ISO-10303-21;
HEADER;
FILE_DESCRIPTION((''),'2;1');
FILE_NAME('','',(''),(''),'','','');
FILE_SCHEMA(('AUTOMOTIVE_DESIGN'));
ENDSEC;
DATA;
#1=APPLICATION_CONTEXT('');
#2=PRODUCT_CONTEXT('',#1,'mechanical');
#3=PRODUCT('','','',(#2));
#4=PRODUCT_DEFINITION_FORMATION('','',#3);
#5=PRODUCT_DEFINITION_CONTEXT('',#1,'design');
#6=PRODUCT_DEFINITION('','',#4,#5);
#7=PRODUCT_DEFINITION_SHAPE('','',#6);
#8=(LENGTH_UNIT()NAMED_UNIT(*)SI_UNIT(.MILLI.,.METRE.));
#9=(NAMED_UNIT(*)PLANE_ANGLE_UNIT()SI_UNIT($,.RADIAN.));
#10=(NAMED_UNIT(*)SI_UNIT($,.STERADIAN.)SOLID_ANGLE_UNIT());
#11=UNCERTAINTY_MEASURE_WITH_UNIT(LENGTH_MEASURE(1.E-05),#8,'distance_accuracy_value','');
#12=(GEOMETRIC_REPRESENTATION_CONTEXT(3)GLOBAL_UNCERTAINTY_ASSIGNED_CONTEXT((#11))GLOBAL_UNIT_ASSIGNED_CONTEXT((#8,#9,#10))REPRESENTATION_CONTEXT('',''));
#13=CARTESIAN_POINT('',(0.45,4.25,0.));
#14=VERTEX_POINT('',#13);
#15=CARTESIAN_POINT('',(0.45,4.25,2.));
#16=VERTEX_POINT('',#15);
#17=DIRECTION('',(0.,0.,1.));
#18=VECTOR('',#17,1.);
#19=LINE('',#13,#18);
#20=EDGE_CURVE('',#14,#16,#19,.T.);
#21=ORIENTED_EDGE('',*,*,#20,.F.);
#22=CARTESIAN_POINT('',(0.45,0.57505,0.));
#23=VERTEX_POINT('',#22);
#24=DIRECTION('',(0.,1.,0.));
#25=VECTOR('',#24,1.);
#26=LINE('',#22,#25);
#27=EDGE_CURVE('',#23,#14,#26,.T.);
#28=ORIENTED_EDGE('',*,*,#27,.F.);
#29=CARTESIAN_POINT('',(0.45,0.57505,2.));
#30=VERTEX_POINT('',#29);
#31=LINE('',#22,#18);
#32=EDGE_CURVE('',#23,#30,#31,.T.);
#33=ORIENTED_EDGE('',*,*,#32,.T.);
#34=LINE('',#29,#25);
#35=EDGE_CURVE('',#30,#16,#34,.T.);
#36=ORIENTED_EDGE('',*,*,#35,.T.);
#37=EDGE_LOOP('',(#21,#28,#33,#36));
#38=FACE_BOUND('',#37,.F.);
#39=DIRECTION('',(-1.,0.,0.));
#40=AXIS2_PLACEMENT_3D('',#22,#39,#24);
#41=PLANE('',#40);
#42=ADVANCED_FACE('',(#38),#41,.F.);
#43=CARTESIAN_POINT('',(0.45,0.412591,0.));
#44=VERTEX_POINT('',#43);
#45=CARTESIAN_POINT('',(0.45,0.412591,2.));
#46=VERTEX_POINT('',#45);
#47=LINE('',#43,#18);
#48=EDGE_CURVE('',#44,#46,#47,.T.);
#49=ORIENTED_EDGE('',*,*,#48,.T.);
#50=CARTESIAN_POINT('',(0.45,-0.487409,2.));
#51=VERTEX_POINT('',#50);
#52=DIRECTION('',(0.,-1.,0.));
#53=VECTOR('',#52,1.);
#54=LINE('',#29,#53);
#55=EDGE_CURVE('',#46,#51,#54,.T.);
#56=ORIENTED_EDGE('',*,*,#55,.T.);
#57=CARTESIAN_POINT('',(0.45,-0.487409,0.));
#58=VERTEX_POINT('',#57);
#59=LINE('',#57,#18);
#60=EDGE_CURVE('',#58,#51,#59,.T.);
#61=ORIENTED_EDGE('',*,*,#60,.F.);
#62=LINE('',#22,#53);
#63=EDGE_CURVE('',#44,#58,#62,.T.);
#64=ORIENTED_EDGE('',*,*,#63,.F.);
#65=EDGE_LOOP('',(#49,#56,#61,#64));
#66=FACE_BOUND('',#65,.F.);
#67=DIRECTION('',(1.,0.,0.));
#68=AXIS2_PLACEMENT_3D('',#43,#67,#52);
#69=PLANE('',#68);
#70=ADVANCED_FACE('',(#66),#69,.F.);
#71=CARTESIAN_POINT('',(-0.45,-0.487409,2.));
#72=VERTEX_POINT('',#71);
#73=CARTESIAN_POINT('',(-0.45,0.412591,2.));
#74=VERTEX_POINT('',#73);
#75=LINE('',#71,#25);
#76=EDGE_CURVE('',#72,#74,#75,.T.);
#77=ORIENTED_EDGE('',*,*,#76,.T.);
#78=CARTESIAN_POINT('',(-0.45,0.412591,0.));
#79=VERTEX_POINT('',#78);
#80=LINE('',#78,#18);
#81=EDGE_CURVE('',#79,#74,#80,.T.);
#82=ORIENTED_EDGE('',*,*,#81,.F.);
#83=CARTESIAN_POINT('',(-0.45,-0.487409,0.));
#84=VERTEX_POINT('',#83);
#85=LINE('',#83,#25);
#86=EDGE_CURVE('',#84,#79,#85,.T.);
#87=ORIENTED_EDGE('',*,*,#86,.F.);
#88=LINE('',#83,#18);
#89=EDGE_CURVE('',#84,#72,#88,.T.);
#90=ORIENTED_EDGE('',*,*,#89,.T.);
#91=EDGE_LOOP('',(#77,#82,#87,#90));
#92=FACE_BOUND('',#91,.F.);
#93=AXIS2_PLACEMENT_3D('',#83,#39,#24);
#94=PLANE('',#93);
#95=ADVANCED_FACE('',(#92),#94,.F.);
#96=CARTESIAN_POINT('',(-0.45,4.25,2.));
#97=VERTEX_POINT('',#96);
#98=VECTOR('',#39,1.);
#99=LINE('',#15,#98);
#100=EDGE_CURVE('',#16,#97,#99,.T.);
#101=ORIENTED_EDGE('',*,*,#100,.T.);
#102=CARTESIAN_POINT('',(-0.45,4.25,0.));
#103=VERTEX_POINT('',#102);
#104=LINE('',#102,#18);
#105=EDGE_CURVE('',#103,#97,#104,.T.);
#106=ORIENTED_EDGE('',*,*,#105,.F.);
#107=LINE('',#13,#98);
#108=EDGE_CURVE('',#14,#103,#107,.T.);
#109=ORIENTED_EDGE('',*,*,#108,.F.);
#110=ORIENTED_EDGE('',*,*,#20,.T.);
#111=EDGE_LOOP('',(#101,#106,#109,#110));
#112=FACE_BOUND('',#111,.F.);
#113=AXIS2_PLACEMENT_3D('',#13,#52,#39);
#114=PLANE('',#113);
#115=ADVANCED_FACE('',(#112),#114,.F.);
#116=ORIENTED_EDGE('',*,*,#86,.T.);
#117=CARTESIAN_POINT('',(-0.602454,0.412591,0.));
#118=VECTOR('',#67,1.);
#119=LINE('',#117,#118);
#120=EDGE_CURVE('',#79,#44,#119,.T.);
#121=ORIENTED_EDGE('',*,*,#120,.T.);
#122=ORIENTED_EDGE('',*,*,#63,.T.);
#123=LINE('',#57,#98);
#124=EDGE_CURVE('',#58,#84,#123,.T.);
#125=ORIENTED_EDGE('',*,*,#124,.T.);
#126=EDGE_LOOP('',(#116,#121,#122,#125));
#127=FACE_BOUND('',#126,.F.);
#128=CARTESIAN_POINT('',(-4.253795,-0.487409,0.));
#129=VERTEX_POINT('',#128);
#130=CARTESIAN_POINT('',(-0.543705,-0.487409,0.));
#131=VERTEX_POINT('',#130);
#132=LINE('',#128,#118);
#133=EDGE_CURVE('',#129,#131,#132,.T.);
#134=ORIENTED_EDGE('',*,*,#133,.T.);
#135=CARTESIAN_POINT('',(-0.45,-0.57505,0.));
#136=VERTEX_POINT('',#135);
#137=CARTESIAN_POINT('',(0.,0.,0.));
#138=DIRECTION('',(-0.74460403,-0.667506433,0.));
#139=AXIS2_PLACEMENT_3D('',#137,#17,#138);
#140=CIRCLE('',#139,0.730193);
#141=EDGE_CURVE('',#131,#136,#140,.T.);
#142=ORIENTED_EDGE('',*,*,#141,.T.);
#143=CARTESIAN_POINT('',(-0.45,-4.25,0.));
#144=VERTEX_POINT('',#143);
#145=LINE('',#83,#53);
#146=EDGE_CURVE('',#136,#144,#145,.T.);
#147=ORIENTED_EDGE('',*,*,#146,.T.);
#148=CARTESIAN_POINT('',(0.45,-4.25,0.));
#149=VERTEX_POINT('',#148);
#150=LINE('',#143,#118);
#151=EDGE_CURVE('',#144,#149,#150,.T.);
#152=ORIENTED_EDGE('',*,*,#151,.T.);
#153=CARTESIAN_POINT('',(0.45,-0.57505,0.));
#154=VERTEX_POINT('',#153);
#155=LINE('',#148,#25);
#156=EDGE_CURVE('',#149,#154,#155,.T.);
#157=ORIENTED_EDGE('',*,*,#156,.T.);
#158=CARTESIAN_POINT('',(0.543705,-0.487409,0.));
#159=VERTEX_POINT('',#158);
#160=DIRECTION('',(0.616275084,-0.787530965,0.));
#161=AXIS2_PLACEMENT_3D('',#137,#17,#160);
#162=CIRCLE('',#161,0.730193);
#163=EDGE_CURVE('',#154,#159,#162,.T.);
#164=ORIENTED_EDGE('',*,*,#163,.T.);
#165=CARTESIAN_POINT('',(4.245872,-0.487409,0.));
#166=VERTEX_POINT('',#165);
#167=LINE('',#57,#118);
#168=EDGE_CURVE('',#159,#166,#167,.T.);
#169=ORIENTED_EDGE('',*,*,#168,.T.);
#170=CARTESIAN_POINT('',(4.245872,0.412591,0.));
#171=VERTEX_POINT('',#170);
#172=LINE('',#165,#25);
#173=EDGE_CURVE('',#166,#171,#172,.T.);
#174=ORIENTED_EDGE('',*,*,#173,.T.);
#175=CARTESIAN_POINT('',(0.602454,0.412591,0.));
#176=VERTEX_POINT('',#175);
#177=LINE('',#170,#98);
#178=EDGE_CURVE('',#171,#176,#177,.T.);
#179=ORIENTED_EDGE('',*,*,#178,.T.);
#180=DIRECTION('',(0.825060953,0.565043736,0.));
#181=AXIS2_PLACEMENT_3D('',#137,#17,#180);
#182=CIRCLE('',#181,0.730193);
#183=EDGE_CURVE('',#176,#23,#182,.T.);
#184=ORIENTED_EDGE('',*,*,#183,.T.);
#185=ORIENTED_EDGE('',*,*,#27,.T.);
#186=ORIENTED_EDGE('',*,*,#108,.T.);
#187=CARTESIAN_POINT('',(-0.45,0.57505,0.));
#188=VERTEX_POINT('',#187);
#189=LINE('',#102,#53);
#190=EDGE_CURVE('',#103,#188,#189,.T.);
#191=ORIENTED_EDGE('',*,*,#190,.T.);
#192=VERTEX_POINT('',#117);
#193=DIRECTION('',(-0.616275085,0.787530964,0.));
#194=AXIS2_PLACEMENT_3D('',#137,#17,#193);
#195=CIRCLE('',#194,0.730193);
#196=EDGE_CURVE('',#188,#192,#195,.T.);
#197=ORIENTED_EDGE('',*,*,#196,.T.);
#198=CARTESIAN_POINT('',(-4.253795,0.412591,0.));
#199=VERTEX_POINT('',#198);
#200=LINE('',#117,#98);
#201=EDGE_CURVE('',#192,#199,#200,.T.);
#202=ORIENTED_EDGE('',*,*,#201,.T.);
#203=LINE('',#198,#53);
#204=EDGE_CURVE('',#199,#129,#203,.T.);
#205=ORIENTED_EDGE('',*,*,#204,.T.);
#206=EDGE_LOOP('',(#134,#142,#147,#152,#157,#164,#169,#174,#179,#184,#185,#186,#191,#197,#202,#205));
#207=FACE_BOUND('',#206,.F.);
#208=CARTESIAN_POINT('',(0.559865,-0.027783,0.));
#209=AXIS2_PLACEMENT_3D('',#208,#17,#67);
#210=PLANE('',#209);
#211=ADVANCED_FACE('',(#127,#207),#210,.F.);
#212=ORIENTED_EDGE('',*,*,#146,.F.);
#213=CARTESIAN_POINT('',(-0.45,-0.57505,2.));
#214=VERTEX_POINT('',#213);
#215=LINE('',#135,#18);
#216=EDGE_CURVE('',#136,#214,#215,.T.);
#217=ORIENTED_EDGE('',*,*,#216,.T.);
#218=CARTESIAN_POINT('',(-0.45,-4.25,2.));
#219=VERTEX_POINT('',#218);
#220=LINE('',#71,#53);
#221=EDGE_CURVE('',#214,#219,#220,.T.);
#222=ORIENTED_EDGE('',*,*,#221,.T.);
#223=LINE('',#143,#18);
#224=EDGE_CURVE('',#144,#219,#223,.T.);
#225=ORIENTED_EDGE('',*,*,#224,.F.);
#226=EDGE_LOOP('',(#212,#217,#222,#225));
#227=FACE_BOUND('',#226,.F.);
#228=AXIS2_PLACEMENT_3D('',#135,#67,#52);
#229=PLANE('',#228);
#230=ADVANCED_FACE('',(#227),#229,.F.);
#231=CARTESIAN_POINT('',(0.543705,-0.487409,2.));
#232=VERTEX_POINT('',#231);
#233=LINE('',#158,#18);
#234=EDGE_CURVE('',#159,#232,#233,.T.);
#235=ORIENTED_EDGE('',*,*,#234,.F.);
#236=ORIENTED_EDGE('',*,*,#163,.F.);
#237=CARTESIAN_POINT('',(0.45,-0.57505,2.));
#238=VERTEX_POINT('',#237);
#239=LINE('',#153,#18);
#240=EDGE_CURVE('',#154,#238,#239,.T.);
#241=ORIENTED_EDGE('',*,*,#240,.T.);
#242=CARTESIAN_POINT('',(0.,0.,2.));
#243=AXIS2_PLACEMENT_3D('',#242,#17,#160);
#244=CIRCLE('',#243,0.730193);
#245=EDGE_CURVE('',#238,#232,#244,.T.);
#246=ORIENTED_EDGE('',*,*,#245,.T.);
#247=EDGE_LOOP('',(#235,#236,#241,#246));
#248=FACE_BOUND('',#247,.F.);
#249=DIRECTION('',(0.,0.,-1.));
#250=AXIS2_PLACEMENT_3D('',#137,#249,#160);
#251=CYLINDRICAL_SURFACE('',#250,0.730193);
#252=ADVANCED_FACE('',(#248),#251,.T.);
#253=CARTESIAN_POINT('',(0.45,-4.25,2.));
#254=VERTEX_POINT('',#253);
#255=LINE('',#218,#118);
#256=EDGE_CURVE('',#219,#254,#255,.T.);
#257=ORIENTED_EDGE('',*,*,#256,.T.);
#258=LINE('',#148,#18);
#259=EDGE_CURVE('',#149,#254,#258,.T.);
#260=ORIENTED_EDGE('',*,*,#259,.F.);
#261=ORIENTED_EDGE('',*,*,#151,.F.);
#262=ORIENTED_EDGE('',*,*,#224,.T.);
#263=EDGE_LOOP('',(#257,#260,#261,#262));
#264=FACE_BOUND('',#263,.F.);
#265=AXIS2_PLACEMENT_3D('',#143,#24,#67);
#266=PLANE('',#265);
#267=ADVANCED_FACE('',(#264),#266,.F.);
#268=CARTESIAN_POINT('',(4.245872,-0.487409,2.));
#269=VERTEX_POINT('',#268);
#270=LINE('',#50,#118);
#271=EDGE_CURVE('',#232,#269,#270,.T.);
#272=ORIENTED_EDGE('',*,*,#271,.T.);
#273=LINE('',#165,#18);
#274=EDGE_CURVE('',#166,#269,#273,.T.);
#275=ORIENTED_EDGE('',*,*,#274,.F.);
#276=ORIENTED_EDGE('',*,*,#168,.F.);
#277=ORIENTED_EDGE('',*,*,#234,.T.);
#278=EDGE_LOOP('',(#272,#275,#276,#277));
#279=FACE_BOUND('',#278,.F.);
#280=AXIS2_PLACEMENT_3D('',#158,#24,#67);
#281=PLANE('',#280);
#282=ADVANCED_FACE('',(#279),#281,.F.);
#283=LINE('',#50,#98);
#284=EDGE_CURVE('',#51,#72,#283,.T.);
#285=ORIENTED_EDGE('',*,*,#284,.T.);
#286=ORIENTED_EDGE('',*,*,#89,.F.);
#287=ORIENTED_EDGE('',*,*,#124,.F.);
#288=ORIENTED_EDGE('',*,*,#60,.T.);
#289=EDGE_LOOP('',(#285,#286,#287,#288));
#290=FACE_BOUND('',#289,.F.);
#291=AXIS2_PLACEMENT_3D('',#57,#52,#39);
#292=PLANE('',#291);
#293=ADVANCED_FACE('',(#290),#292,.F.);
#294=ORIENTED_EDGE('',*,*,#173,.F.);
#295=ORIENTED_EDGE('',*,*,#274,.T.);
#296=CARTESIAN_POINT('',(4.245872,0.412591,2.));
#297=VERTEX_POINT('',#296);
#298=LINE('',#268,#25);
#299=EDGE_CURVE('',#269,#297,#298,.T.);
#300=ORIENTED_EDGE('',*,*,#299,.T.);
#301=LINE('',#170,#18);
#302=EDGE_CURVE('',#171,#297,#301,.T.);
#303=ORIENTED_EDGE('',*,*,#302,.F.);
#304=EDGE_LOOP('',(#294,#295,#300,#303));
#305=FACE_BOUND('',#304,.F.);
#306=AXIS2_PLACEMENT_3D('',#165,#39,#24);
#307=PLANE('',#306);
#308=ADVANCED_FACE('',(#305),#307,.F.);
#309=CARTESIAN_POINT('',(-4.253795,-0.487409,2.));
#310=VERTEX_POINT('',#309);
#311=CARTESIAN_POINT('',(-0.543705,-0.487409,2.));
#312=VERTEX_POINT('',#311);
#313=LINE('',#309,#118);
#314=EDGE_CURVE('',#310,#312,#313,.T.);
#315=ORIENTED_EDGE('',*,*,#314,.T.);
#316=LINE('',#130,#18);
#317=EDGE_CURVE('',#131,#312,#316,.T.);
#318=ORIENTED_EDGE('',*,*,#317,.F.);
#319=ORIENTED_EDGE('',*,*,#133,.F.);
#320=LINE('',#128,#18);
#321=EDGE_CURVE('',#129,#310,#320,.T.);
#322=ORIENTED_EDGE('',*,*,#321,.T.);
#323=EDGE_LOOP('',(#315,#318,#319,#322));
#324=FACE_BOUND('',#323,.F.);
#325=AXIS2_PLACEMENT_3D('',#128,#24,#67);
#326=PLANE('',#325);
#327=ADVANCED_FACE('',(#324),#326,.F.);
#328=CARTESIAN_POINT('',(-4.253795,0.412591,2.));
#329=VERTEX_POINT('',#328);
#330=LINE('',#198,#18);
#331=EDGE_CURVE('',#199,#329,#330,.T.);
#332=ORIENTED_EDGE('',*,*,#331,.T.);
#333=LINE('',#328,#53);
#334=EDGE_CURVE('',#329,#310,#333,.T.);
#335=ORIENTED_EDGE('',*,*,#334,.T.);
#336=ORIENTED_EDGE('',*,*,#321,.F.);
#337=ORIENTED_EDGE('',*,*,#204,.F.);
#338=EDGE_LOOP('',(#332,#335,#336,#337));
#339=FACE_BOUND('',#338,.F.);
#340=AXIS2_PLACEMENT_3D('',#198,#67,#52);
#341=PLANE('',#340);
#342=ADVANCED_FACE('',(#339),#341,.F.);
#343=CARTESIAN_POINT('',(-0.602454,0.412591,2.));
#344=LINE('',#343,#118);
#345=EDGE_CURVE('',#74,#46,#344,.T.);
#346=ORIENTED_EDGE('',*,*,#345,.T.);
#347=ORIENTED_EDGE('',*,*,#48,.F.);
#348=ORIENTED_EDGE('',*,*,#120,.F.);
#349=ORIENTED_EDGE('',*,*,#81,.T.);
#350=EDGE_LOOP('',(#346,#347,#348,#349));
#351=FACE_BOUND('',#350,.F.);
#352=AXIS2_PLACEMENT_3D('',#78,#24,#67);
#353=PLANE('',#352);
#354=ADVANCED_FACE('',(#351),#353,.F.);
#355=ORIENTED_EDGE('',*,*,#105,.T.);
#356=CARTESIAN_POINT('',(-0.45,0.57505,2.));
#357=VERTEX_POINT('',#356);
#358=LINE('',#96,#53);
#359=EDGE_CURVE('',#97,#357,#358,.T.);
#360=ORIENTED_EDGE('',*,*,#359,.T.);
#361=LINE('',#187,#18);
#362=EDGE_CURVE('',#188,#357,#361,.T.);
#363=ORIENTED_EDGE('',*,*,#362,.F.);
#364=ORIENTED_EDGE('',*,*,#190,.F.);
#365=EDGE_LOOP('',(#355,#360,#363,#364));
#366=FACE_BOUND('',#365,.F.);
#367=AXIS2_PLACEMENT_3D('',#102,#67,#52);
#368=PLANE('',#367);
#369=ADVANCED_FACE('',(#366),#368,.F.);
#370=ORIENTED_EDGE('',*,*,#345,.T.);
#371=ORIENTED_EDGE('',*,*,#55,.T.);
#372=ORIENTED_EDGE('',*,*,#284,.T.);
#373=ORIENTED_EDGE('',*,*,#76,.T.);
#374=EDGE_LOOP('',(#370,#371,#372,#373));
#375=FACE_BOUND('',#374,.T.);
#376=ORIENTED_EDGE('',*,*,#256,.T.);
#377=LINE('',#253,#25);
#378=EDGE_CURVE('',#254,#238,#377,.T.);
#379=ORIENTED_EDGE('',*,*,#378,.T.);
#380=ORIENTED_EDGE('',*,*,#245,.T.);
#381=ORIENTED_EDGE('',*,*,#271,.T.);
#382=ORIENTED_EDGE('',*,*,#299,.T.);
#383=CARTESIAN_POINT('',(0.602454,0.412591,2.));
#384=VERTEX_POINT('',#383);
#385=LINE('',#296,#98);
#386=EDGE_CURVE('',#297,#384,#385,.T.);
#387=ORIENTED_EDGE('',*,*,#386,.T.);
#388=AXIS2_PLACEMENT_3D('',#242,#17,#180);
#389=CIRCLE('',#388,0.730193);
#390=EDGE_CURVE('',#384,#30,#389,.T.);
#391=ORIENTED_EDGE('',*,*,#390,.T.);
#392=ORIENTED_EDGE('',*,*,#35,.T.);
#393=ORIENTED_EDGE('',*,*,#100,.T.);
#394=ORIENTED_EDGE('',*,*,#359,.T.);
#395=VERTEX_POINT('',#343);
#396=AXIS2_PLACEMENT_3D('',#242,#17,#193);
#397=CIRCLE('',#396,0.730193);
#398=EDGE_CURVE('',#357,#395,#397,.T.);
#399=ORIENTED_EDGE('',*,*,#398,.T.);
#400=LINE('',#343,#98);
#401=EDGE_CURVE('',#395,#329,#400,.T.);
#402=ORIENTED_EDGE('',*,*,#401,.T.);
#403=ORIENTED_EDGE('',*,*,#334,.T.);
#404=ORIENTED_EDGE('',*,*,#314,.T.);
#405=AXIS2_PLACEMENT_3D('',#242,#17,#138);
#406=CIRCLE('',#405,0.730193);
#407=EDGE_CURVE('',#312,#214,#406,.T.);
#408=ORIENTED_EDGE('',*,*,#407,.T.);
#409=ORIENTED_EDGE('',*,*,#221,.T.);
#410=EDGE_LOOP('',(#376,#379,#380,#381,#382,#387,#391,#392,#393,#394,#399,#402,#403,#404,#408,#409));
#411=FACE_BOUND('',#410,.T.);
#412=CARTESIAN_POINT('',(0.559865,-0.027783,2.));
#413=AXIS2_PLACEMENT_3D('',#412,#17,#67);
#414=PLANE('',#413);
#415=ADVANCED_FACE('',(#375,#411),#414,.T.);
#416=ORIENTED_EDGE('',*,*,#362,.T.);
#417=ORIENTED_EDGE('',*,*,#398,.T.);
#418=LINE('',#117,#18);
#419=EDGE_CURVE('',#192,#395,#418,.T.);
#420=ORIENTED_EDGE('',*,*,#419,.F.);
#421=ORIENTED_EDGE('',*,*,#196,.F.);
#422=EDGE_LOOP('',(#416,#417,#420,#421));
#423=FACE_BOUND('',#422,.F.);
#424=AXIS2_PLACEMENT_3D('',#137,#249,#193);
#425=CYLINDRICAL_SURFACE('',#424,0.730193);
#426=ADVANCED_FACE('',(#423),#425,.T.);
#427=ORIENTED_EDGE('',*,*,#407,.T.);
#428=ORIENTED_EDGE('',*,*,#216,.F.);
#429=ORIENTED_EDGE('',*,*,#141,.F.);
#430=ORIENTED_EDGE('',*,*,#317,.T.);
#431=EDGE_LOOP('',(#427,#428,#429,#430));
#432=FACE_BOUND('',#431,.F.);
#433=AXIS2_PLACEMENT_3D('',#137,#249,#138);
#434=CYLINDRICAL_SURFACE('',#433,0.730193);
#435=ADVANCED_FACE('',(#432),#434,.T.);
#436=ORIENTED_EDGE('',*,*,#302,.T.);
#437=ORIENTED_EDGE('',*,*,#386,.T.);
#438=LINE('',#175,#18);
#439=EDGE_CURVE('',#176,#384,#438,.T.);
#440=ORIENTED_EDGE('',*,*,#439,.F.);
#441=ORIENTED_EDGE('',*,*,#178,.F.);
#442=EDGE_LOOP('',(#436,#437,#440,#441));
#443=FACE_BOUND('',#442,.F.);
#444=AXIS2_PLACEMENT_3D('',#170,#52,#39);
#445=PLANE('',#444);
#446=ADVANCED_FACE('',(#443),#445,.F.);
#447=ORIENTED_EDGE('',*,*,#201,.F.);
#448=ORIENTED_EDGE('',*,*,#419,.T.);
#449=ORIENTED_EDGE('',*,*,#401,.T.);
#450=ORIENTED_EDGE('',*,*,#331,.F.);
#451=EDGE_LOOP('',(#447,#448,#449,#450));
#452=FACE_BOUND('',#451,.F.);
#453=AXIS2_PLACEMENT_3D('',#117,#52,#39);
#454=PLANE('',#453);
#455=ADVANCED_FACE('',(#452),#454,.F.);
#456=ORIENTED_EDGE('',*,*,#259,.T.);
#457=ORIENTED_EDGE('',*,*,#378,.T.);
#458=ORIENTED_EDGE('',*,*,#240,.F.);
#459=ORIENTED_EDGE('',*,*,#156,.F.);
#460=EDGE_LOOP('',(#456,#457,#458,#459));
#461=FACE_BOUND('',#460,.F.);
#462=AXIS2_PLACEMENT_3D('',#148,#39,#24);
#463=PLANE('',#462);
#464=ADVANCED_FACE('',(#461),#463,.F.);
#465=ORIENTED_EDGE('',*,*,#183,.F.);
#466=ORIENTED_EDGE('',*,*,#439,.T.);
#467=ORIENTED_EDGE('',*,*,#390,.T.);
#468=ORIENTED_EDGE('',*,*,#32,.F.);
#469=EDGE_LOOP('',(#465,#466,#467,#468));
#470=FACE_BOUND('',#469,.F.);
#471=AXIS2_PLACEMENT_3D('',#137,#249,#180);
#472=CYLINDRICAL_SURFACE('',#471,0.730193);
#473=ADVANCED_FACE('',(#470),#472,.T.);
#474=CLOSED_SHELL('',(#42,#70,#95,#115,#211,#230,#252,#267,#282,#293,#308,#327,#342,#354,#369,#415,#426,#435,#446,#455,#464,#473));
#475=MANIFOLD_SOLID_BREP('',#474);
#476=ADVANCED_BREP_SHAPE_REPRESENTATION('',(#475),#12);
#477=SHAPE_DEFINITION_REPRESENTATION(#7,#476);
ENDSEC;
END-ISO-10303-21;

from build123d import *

# Parameters (mm, degrees)
F1_DEPTH = 2


# Not quite as in the source:
# - the program builds the solid bodies; features that only make, move or delete a surface that nothing else refers to are left out


with BuildPart() as f1:
    # F0 (on Top) → F1 (new body)
    with BuildSketch(Plane.XY):
        with BuildLine():
            ThreePointArc((0.5437049493, -0.4874087926), (0.6819795338, -0.2609335518), (0.7301934011, 0))
            ThreePointArc((0.7301934011, 0), (0.697527915, 0.2159565019), (0.6024540634, 0.4125912074))
            Line((0.6024540634, 0.4125912074), (0.45, 0.4125912074))
            Line((0.45, 0.4125912074), (0.45, -0.4874087926))
            Line((0.45, -0.4874087926), (0.5437049493, -0.4874087926))
        make_face()
        with BuildLine():
            ThreePointArc((0.6024540634, 0.4125912074), (0.697527915, 0.2159565019), (0.7301934011, 0))
            ThreePointArc((0.7301934011, 0), (0.6819795338, -0.2609335518), (0.5437049493, -0.4874087926))
            Line((0.5437049493, -0.4874087926), (4.2458724273, -0.4874087926))
            Line((4.2458724273, -0.4874087926), (4.2458724273, 0.4125912074))
            Line((4.2458724273, 0.4125912074), (0.6024540634, 0.4125912074))
        make_face()
        with BuildLine():
            Line((0.45, 0.4125912074), (0.6024540634, 0.4125912074))
            ThreePointArc((0.6024540634, 0.4125912074), (0.5324594789, 0.4996691968), (0.45, 0.5750499134))
            Line((0.45, 0.5750499134), (0.45, 0.4125912074))
        make_face()
        with BuildLine():
            ThreePointArc((0.45, -0.5750499134), (0.4987811374, -0.5332914587), (0.5437049493, -0.4874087926))
            Line((0.5437049493, -0.4874087926), (0.45, -0.4874087926))
            Line((0.45, -0.4874087926), (0.45, -0.5750499134))
        make_face()
        with BuildLine():
            Line((0.45, 0.4125912074), (0.45, 0.5750499134))
            ThreePointArc((0.45, 0.5750499134), (0, 0.7301934011), (-0.45, 0.5750499134))
            Line((-0.45, 0.5750499134), (-0.45, 0.4125912074))
            Line((-0.45, 0.4125912074), (0.45, 0.4125912074))
        make_face()
        with BuildLine():
            ThreePointArc((-0.45, 0.5750499134), (0, 0.7301934011), (0.45, 0.5750499134))
            Line((0.45, 0.5750499134), (0.45, 4.25))
            Line((0.45, 4.25), (-0.45, 4.25))
            Line((-0.45, 4.25), (-0.45, 0.5750499134))
        make_face()
        with BuildLine():
            Line((0.45, -4.25), (0.45, -0.5750499134))
            ThreePointArc((0.45, -0.5750499134), (0, -0.7301934011), (-0.45, -0.5750499134))
            Line((-0.45, -0.5750499134), (-0.45, -4.25))
            Line((-0.45, -4.25), (0.45, -4.25))
        make_face()
        with BuildLine():
            ThreePointArc((-0.45, -0.5750499134), (0, -0.7301934011), (0.45, -0.5750499134))
            Line((0.45, -0.5750499134), (0.45, -0.4874087926))
            Line((0.45, -0.4874087926), (-0.45, -0.4874087926))
            Line((-0.45, -0.4874087926), (-0.45, -0.5750499134))
        make_face()
        with BuildLine():
            Line((-0.45, 0.4125912074), (-0.45, 0.5750499134))
            ThreePointArc((-0.45, 0.5750499134), (-0.5324594789, 0.4996691968), (-0.6024540634, 0.4125912074))
            Line((-0.6024540634, 0.4125912074), (-0.45, 0.4125912074))
        make_face()
        with BuildLine():
            Line((-0.45, -0.4874087926), (-0.45, 0.4125912074))
            Line((-0.45, 0.4125912074), (-0.6024540634, 0.4125912074))
            ThreePointArc((-0.6024540634, 0.4125912074), (-0.7286426563, -0.0475634562), (-0.5437049493, -0.4874087926))
            Line((-0.5437049493, -0.4874087926), (-0.45, -0.4874087926))
        make_face()
        with BuildLine():
            ThreePointArc((-0.5437049493, -0.4874087926), (-0.4987811374, -0.5332914587), (-0.45, -0.5750499134))
            Line((-0.45, -0.5750499134), (-0.45, -0.4874087926))
            Line((-0.45, -0.4874087926), (-0.5437049493, -0.4874087926))
        make_face()
        with BuildLine():
            ThreePointArc((-0.5437049493, -0.4874087926), (-0.7286426563, -0.0475634562), (-0.6024540634, 0.4125912074))
            Line((-0.6024540634, 0.4125912074), (-4.2537945996, 0.4125912074))
            Line((-4.2537945996, 0.4125912074), (-4.2537945996, -0.4874087926))
            Line((-4.2537945996, -0.4874087926), (-0.5437049493, -0.4874087926))
        make_face()
    extrude(amount=F1_DEPTH)


solid = f1.part
